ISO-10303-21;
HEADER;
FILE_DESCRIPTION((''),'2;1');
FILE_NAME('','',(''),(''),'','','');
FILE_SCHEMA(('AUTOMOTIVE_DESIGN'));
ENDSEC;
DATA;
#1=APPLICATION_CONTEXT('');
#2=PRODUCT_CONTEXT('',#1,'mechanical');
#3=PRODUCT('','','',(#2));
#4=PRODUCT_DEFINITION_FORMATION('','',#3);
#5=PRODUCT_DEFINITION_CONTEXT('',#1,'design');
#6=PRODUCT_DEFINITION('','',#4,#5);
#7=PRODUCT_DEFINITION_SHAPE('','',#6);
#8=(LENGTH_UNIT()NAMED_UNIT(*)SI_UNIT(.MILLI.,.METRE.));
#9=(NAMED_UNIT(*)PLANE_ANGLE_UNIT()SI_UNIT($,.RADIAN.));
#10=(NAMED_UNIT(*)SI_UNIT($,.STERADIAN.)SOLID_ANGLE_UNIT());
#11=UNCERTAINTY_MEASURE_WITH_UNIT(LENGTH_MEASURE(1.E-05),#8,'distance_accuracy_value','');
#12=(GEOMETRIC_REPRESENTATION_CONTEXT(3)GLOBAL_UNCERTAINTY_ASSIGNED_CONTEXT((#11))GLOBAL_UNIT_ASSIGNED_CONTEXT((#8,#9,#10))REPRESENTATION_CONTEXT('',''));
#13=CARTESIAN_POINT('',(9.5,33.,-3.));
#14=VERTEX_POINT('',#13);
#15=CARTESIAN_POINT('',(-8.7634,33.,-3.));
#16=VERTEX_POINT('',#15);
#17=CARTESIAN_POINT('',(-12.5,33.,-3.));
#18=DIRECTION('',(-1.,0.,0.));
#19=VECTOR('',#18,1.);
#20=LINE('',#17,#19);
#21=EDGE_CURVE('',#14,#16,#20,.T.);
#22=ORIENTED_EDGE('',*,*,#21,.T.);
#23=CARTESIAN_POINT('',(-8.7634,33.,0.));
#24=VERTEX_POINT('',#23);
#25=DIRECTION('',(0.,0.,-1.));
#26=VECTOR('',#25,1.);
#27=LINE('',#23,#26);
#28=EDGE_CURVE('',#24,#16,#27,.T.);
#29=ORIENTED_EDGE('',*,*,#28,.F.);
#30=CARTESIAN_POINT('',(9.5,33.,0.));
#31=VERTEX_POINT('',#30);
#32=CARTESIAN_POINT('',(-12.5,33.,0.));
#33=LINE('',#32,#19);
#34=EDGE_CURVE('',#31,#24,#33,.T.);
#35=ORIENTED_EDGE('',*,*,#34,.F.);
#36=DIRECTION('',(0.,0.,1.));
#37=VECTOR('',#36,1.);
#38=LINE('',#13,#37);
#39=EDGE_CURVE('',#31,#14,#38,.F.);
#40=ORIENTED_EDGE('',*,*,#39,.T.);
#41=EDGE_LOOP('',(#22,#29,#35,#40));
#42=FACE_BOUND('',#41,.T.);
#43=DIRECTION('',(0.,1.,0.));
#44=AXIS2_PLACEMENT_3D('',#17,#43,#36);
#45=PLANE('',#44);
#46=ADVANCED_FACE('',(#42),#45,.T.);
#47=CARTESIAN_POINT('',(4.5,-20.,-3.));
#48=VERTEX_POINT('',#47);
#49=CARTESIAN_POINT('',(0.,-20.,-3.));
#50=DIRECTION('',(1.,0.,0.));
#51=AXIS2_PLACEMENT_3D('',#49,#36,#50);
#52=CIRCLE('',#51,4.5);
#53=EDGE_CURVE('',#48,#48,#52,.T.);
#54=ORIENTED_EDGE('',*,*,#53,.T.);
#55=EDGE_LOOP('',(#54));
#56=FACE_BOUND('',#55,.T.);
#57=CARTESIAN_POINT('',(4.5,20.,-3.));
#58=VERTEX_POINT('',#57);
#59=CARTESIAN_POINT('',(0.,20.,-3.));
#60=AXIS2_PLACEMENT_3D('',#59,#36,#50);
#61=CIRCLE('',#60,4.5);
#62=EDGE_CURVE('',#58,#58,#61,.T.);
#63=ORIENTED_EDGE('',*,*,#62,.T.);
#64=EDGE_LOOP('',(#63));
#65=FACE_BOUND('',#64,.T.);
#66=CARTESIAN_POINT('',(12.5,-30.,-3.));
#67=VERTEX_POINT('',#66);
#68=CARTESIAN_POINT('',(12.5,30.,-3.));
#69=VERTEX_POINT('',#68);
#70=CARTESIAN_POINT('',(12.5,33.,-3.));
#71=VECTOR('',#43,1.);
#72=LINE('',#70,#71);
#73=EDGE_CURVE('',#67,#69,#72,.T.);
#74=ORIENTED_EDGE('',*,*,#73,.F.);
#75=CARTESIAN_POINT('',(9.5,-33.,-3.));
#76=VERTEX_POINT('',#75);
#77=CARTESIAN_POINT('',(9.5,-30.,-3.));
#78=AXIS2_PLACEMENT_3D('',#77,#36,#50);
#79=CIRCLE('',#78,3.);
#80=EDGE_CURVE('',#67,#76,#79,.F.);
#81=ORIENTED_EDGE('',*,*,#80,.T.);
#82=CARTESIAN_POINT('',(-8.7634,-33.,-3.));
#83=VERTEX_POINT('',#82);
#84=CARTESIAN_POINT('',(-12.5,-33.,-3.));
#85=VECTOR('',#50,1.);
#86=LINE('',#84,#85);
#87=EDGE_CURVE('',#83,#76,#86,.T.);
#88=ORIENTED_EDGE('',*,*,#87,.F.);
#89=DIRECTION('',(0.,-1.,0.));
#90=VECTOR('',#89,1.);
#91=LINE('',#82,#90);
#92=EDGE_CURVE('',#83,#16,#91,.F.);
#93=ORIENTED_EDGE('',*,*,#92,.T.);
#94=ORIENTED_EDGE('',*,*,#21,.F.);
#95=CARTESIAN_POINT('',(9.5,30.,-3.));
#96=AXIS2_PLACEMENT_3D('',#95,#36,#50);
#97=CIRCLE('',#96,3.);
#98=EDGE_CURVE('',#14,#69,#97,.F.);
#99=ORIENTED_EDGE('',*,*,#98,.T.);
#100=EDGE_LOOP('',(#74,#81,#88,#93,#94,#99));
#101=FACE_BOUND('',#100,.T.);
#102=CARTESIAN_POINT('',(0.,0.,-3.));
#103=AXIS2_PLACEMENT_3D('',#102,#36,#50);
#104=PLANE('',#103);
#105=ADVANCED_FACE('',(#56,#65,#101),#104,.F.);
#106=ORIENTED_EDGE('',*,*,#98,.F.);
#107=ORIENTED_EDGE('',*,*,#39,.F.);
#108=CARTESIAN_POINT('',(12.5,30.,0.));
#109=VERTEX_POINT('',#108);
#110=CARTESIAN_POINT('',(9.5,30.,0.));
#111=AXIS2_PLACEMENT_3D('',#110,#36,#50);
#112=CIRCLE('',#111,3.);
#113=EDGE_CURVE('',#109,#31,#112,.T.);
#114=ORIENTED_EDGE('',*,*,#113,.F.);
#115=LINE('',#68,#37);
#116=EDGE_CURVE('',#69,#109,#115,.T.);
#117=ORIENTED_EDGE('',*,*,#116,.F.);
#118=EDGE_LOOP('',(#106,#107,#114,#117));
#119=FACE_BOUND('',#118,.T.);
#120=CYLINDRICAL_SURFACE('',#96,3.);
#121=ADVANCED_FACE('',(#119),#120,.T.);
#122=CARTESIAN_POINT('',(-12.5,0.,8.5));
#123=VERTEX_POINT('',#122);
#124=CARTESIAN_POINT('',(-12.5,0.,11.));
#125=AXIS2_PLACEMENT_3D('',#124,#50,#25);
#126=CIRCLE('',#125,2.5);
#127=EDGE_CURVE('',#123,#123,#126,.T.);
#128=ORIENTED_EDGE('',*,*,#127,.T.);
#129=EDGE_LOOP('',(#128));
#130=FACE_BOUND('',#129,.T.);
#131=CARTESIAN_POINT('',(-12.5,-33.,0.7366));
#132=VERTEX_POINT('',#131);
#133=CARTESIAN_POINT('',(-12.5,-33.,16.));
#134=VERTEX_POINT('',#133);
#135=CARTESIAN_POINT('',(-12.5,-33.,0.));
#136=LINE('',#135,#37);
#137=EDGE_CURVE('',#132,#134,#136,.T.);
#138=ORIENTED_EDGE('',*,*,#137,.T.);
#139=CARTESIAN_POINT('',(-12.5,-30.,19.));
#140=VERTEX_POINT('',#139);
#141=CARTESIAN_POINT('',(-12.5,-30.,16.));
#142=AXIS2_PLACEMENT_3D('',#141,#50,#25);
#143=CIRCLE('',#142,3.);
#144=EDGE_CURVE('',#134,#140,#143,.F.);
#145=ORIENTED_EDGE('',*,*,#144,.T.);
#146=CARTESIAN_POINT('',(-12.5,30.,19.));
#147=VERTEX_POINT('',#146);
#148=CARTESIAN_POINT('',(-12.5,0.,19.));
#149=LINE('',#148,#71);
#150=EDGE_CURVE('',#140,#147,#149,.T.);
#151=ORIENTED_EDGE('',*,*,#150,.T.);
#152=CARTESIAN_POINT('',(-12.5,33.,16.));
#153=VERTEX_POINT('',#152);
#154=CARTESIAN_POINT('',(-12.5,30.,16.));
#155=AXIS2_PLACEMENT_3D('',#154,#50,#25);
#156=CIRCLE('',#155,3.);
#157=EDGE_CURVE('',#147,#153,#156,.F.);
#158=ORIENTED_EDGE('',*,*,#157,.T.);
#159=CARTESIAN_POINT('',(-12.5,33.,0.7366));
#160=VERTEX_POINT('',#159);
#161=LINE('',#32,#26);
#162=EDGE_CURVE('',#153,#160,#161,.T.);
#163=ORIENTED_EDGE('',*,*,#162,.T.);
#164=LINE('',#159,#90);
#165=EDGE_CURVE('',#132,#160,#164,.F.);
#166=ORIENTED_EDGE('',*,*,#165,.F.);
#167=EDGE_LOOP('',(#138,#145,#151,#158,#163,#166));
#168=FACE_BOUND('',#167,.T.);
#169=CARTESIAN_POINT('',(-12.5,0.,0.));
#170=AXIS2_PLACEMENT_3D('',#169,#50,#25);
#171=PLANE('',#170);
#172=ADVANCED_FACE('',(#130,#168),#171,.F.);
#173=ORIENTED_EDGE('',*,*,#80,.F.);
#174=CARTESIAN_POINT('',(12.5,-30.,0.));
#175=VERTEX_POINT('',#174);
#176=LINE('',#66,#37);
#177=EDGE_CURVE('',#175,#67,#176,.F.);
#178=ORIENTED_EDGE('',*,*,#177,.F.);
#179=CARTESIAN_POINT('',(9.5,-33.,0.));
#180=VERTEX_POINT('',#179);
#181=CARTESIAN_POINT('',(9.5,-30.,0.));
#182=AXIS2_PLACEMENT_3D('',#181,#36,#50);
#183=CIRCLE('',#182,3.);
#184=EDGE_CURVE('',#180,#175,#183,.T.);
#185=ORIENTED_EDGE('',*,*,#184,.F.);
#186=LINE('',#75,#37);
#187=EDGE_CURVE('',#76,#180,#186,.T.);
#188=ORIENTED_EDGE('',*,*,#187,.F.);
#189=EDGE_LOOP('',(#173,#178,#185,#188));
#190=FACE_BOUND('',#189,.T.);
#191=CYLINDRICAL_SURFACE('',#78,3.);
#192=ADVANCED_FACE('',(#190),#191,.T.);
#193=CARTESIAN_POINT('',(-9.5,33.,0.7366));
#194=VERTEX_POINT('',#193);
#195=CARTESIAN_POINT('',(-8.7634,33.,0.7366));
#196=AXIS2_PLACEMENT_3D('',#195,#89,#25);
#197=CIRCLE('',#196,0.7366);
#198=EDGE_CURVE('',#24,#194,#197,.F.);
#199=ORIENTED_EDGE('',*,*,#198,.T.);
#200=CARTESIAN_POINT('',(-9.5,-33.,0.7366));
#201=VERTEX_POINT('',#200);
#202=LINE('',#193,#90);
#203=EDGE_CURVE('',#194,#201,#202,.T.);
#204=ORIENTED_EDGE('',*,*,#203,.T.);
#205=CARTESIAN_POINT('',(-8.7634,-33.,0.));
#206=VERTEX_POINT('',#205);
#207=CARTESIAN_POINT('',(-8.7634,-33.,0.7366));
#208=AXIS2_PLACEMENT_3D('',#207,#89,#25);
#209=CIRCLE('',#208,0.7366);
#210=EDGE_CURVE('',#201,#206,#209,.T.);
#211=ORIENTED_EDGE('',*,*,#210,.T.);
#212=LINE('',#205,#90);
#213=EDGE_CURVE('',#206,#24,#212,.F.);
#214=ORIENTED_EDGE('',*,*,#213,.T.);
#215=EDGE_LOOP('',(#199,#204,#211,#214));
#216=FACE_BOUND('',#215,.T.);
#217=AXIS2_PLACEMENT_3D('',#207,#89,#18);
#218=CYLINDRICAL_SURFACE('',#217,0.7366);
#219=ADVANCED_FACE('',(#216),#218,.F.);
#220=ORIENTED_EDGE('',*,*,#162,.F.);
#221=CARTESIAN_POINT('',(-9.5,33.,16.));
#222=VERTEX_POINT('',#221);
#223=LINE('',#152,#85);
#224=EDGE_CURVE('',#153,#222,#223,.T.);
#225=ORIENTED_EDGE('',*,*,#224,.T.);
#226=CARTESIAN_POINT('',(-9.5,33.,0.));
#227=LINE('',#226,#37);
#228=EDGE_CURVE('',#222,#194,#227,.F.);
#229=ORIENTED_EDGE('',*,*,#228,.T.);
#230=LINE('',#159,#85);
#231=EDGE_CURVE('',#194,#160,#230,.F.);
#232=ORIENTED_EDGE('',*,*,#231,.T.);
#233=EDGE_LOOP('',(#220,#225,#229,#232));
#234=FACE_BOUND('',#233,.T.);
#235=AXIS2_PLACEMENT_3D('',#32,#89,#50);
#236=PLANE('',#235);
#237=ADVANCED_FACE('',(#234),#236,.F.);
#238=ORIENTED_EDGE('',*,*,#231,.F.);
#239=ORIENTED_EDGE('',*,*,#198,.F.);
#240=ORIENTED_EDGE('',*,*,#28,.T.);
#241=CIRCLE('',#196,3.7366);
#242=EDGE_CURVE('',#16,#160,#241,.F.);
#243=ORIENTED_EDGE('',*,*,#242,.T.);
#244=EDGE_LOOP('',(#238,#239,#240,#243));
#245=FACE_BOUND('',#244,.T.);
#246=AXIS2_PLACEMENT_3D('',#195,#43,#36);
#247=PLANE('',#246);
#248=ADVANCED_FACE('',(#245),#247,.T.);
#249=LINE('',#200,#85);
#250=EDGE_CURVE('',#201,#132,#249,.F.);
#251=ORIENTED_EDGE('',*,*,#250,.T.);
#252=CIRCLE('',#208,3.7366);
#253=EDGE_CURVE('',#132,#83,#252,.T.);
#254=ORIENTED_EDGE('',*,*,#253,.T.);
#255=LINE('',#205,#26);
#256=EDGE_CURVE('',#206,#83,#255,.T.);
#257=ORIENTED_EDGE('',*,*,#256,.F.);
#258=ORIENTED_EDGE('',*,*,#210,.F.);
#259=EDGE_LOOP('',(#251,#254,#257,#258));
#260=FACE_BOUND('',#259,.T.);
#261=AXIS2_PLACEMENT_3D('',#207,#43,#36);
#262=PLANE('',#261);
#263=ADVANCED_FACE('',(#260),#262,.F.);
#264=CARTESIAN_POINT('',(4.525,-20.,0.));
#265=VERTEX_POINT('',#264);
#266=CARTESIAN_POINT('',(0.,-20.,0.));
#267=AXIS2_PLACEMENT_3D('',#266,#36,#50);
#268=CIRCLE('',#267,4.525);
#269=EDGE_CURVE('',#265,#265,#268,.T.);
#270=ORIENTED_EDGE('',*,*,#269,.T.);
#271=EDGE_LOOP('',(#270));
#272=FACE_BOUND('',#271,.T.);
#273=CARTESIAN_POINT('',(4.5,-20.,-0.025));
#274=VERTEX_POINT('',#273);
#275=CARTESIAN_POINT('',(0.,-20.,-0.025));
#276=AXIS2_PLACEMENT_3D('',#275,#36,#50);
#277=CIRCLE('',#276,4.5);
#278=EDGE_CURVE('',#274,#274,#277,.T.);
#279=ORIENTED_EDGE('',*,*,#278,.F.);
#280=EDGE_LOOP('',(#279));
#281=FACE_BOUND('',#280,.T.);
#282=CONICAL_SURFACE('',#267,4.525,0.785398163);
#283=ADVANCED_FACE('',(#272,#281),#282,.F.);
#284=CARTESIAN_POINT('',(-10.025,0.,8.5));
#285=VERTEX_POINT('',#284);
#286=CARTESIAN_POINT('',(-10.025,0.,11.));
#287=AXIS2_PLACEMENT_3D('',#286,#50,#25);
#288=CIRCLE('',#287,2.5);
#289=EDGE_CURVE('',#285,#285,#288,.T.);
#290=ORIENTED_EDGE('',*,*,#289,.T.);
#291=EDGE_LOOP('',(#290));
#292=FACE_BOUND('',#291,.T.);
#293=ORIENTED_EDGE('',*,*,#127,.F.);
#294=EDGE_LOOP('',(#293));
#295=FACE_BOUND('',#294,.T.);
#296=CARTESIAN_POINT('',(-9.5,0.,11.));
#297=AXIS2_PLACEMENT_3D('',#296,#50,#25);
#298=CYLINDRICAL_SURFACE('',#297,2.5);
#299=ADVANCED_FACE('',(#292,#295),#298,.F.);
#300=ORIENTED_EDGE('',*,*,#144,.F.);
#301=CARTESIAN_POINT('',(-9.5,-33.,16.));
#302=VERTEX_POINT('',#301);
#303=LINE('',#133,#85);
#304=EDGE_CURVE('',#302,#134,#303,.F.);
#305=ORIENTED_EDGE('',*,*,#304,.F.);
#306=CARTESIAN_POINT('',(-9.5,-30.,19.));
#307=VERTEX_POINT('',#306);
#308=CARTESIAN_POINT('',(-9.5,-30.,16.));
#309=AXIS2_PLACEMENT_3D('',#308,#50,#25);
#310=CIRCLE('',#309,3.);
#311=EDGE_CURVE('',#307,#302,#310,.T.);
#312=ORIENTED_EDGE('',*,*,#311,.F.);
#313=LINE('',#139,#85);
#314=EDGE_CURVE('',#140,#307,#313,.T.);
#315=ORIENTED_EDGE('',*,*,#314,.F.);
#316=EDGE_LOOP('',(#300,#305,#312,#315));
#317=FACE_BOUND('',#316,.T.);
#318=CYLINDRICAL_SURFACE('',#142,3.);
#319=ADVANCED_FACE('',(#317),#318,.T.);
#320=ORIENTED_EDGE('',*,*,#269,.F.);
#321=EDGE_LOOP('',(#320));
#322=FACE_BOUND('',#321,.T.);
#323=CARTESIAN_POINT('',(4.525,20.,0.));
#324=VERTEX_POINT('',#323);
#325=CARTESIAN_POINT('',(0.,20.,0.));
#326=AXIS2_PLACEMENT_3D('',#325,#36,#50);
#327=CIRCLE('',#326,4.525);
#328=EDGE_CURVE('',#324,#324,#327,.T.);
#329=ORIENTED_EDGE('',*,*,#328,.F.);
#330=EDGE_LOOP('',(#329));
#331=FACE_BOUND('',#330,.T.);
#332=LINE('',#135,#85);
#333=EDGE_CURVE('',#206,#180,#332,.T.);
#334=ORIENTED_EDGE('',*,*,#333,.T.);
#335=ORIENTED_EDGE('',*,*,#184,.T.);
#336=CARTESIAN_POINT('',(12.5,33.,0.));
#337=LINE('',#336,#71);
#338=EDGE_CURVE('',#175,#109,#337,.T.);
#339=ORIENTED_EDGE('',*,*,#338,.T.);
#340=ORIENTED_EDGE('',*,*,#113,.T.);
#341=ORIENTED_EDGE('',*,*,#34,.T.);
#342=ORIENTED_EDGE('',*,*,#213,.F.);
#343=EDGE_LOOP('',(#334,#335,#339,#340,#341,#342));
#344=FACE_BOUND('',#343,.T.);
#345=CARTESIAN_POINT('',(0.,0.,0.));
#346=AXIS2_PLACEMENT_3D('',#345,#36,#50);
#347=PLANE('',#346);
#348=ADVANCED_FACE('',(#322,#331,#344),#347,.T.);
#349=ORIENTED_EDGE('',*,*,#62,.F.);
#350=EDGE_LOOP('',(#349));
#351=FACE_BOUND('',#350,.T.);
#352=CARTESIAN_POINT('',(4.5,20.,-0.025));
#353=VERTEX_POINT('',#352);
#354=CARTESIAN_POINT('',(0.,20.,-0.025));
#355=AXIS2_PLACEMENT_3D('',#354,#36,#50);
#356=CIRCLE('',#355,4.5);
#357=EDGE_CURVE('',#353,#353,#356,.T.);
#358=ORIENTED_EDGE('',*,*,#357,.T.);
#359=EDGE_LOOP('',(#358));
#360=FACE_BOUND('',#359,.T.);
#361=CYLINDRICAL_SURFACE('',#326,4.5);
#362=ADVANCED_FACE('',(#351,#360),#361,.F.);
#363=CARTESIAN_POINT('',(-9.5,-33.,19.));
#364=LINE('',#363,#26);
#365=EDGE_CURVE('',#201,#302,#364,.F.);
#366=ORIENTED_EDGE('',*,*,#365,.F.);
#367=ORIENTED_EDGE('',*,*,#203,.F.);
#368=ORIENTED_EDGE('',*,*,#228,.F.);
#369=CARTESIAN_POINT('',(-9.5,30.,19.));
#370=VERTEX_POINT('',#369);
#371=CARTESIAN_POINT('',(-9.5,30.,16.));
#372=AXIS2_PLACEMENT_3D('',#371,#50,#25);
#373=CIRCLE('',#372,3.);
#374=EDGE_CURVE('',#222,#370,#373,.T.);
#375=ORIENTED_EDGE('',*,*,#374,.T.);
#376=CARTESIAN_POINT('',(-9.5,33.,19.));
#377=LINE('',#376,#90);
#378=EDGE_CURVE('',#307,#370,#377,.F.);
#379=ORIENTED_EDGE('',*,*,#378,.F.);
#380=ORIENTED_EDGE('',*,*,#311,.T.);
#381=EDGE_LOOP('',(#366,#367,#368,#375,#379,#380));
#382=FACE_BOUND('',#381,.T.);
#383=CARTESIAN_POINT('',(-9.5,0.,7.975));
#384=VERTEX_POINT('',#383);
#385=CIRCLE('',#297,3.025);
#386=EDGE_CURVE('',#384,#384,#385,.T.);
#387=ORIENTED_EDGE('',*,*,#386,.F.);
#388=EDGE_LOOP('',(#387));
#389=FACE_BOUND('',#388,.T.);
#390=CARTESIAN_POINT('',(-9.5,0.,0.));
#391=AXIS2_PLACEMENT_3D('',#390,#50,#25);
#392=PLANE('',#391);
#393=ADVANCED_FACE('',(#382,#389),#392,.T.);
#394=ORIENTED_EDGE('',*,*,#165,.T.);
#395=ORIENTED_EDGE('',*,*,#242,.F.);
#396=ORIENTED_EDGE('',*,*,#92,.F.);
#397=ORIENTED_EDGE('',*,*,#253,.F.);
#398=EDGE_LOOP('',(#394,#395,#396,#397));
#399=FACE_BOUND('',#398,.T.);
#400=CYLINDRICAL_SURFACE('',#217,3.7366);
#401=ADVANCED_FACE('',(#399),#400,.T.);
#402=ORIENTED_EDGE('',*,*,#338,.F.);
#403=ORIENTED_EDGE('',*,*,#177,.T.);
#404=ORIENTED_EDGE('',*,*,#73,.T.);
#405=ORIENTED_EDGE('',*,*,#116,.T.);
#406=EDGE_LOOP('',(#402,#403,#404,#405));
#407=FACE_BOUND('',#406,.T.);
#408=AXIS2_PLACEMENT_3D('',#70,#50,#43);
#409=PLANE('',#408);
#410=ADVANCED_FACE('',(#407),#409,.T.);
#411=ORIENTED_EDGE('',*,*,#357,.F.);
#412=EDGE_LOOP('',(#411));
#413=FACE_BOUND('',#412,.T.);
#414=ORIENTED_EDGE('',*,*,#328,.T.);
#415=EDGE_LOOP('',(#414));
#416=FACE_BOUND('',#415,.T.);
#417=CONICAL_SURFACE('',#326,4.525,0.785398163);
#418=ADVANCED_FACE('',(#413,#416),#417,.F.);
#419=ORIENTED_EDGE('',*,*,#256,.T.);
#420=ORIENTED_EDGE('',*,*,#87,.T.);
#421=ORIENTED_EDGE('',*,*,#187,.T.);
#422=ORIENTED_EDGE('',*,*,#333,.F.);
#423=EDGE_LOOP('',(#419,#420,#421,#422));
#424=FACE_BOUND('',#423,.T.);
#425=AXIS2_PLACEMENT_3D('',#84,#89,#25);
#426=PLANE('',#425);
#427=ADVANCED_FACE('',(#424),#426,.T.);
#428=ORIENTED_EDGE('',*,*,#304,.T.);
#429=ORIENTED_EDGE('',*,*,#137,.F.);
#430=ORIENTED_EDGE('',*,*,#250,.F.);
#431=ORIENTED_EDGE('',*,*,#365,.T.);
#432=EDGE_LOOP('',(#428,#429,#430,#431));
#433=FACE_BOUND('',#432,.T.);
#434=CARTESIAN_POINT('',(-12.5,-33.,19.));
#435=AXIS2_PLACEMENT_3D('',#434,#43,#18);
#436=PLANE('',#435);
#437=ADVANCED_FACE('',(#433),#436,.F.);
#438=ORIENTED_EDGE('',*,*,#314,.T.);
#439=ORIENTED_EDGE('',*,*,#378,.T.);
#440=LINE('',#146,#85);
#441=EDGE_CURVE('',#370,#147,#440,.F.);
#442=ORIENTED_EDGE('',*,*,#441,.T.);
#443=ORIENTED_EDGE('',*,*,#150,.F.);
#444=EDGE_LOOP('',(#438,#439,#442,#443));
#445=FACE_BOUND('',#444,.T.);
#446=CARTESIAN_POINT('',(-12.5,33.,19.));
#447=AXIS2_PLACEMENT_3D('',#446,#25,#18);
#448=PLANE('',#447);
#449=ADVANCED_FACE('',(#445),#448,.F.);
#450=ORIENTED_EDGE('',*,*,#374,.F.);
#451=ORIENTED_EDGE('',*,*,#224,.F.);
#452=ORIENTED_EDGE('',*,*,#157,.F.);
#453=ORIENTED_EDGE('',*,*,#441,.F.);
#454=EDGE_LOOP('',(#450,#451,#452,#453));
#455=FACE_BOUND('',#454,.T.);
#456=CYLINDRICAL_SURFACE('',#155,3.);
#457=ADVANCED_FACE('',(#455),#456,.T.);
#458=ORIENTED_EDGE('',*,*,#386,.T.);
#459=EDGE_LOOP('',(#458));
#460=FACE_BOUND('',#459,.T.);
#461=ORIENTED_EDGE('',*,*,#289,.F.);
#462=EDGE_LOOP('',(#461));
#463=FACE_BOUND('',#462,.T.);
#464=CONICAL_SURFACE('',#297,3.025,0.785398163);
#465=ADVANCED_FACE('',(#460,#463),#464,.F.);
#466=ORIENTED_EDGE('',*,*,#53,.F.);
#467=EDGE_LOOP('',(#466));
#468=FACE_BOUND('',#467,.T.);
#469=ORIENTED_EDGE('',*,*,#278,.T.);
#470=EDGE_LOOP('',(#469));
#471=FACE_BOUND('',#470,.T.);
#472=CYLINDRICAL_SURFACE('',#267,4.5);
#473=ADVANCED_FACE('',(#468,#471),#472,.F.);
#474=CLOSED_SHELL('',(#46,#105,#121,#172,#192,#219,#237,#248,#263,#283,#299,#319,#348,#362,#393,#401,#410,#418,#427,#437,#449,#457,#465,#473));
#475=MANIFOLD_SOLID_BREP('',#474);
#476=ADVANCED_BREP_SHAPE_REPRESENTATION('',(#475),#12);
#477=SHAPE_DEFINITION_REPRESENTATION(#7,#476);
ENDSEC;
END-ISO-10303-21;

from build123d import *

# Parameters (mm, degrees)
SKETCH_1_W                       = 25
SKETCH_1_H                       = 66
SM_BASE_FLANGE_1_DEPTH           = 3
SM_EDGE_FLANGE_1_STRIP_W         = 13.4732
SM_EDGE_FLANGE_1_STRIP_H         = 3
SM_EDGE_FLANGE_1_STRIP_CUT_DEPTH = 66
SM_EDGE_FLANGE_1_DEPTH           = 66
OTHER_START                      = -12.5
OTHER_1_DEPTH                    = 3
OTHER_START_2                    = -3
OTHER_1_2_DEPTH                  = 3
HOLE_WIZARD_M8_2_D               = 9
HOLE_WIZARD_M8_2_DEPTH           = 24.5
HOLE_WIZARD_M8_2_CSINK_D         = 9.05
HOLE_WIZARD_M8_2_CSINK_ANGLE     = 90
HOLE_WIZARD_M8_2_TIP             = 2.703872786
HOLE_WIZARD_M6_1_D               = 5
HOLE_WIZARD_M6_1_DEPTH           = 15
HOLE_WIZARD_M6_1_CSINK_D         = 6.05
HOLE_WIZARD_M6_1_CSINK_ANGLE     = 90
HOLE_WIZARD_M6_1_TIP             = 1.502151548


# Read off the part's stored shape, not the designer's step: 断开-边角1
# Sheet-metal steps are written as plain solids
with BuildPart() as part:
    # Sketch 1 → 基体-法兰1 (new body)
    with BuildSketch(Plane.XY):
        Rectangle(SKETCH_1_W, SKETCH_1_H)
    extrude(amount=-SM_BASE_FLANGE_1_DEPTH)

    # 边线-法兰1 strip (across the edge) → 边线-法兰1 strip cut (cut)
    with BuildSketch(Plane(origin=(-12.5, 33, 0), x_dir=(1, 0, 0), z_dir=(0, -1, 0))):
        with Locations((-3, -1.5)):
            Rectangle(SM_EDGE_FLANGE_1_STRIP_W, SM_EDGE_FLANGE_1_STRIP_H)
    extrude(amount=SM_EDGE_FLANGE_1_STRIP_CUT_DEPTH, mode=Mode.SUBTRACT)

    # 边线-法兰1 section (across the edge) → 边线-法兰1 (add)
    with BuildSketch(Plane(origin=(-12.5, 33, 0), x_dir=(1, 0, 0), z_dir=(0, -1, 0))):
        with BuildLine():
            Line((0, 0.7366), (0, 19))
            Line((0, 19), (3, 19))
            Line((3, 19), (3, 0.7366))
            ThreePointArc((3, 0.7366), (3.215745145, 0.215745145), (3.7366, 0))
            Line((3.7366, 0), (3.7366, -3))
            ThreePointArc((3.7366, -3), (1.094424801, -1.905575199), (0, 0.7366))
        make_face()
    extrude(amount=SM_EDGE_FLANGE_1_DEPTH)

    # Other 1 outline → Other 1 (cut)
    with BuildSketch(Plane.YZ.offset(OTHER_START)):
        with BuildLine():
            ThreePointArc((-33, 16), (-32.121320344, 18.121320344), (-30, 19))
            Line((-30, 19), (-33, 19))
            Line((-33, 19), (-33, 16))
        make_face()
        with BuildLine():
            ThreePointArc((30, 19), (32.121320344, 18.121320344), (33, 16))
            Line((33, 16), (33, 19))
            Line((33, 19), (30, 19))
        make_face()
    extrude(amount=OTHER_1_DEPTH, mode=Mode.SUBTRACT)

    # Other 1 2 outline → Other 1 2 (cut)
    with BuildSketch(Plane.XY.offset(OTHER_START_2)):
        with BuildLine():
            ThreePointArc((9.5, 33), (11.621320344, 32.121320344), (12.5, 30))
            Line((12.5, 30), (12.5, 33))
            Line((12.5, 33), (9.5, 33))
        make_face()
        with BuildLine():
            ThreePointArc((12.5, -30), (11.621320344, -32.121320344), (9.5, -33))
            Line((9.5, -33), (12.5, -33))
            Line((12.5, -33), (12.5, -30))
        make_face()
    extrude(amount=OTHER_1_2_DEPTH, mode=Mode.SUBTRACT)

    # M8 间隙孔2
    with Locations(Plane.XY):
        with Locations((0, 20), (0, -20)):
            CounterSinkHole(HOLE_WIZARD_M8_2_D / 2, HOLE_WIZARD_M8_2_CSINK_D / 2, depth=HOLE_WIZARD_M8_2_DEPTH, counter_sink_angle=HOLE_WIZARD_M8_2_CSINK_ANGLE)
            with Locations((0, 0, -(HOLE_WIZARD_M8_2_DEPTH + HOLE_WIZARD_M8_2_TIP / 2))):  # 118° drill point
                Cone(0, HOLE_WIZARD_M8_2_D / 2, HOLE_WIZARD_M8_2_TIP, mode=Mode.SUBTRACT)

    # M6 螺纹孔1
    with Locations(Plane(origin=(-9.5, 0, 0), x_dir=(0, 0, -1), z_dir=(1, 0, 0))):
        with Locations((-11, 0)):
            CounterSinkHole(HOLE_WIZARD_M6_1_D / 2, HOLE_WIZARD_M6_1_CSINK_D / 2, depth=HOLE_WIZARD_M6_1_DEPTH, counter_sink_angle=HOLE_WIZARD_M6_1_CSINK_ANGLE)
            with Locations((0, 0, -(HOLE_WIZARD_M6_1_DEPTH + HOLE_WIZARD_M6_1_TIP / 2))):  # 118° drill point
                Cone(0, HOLE_WIZARD_M6_1_D / 2, HOLE_WIZARD_M6_1_TIP, mode=Mode.SUBTRACT)


solid = part.part
